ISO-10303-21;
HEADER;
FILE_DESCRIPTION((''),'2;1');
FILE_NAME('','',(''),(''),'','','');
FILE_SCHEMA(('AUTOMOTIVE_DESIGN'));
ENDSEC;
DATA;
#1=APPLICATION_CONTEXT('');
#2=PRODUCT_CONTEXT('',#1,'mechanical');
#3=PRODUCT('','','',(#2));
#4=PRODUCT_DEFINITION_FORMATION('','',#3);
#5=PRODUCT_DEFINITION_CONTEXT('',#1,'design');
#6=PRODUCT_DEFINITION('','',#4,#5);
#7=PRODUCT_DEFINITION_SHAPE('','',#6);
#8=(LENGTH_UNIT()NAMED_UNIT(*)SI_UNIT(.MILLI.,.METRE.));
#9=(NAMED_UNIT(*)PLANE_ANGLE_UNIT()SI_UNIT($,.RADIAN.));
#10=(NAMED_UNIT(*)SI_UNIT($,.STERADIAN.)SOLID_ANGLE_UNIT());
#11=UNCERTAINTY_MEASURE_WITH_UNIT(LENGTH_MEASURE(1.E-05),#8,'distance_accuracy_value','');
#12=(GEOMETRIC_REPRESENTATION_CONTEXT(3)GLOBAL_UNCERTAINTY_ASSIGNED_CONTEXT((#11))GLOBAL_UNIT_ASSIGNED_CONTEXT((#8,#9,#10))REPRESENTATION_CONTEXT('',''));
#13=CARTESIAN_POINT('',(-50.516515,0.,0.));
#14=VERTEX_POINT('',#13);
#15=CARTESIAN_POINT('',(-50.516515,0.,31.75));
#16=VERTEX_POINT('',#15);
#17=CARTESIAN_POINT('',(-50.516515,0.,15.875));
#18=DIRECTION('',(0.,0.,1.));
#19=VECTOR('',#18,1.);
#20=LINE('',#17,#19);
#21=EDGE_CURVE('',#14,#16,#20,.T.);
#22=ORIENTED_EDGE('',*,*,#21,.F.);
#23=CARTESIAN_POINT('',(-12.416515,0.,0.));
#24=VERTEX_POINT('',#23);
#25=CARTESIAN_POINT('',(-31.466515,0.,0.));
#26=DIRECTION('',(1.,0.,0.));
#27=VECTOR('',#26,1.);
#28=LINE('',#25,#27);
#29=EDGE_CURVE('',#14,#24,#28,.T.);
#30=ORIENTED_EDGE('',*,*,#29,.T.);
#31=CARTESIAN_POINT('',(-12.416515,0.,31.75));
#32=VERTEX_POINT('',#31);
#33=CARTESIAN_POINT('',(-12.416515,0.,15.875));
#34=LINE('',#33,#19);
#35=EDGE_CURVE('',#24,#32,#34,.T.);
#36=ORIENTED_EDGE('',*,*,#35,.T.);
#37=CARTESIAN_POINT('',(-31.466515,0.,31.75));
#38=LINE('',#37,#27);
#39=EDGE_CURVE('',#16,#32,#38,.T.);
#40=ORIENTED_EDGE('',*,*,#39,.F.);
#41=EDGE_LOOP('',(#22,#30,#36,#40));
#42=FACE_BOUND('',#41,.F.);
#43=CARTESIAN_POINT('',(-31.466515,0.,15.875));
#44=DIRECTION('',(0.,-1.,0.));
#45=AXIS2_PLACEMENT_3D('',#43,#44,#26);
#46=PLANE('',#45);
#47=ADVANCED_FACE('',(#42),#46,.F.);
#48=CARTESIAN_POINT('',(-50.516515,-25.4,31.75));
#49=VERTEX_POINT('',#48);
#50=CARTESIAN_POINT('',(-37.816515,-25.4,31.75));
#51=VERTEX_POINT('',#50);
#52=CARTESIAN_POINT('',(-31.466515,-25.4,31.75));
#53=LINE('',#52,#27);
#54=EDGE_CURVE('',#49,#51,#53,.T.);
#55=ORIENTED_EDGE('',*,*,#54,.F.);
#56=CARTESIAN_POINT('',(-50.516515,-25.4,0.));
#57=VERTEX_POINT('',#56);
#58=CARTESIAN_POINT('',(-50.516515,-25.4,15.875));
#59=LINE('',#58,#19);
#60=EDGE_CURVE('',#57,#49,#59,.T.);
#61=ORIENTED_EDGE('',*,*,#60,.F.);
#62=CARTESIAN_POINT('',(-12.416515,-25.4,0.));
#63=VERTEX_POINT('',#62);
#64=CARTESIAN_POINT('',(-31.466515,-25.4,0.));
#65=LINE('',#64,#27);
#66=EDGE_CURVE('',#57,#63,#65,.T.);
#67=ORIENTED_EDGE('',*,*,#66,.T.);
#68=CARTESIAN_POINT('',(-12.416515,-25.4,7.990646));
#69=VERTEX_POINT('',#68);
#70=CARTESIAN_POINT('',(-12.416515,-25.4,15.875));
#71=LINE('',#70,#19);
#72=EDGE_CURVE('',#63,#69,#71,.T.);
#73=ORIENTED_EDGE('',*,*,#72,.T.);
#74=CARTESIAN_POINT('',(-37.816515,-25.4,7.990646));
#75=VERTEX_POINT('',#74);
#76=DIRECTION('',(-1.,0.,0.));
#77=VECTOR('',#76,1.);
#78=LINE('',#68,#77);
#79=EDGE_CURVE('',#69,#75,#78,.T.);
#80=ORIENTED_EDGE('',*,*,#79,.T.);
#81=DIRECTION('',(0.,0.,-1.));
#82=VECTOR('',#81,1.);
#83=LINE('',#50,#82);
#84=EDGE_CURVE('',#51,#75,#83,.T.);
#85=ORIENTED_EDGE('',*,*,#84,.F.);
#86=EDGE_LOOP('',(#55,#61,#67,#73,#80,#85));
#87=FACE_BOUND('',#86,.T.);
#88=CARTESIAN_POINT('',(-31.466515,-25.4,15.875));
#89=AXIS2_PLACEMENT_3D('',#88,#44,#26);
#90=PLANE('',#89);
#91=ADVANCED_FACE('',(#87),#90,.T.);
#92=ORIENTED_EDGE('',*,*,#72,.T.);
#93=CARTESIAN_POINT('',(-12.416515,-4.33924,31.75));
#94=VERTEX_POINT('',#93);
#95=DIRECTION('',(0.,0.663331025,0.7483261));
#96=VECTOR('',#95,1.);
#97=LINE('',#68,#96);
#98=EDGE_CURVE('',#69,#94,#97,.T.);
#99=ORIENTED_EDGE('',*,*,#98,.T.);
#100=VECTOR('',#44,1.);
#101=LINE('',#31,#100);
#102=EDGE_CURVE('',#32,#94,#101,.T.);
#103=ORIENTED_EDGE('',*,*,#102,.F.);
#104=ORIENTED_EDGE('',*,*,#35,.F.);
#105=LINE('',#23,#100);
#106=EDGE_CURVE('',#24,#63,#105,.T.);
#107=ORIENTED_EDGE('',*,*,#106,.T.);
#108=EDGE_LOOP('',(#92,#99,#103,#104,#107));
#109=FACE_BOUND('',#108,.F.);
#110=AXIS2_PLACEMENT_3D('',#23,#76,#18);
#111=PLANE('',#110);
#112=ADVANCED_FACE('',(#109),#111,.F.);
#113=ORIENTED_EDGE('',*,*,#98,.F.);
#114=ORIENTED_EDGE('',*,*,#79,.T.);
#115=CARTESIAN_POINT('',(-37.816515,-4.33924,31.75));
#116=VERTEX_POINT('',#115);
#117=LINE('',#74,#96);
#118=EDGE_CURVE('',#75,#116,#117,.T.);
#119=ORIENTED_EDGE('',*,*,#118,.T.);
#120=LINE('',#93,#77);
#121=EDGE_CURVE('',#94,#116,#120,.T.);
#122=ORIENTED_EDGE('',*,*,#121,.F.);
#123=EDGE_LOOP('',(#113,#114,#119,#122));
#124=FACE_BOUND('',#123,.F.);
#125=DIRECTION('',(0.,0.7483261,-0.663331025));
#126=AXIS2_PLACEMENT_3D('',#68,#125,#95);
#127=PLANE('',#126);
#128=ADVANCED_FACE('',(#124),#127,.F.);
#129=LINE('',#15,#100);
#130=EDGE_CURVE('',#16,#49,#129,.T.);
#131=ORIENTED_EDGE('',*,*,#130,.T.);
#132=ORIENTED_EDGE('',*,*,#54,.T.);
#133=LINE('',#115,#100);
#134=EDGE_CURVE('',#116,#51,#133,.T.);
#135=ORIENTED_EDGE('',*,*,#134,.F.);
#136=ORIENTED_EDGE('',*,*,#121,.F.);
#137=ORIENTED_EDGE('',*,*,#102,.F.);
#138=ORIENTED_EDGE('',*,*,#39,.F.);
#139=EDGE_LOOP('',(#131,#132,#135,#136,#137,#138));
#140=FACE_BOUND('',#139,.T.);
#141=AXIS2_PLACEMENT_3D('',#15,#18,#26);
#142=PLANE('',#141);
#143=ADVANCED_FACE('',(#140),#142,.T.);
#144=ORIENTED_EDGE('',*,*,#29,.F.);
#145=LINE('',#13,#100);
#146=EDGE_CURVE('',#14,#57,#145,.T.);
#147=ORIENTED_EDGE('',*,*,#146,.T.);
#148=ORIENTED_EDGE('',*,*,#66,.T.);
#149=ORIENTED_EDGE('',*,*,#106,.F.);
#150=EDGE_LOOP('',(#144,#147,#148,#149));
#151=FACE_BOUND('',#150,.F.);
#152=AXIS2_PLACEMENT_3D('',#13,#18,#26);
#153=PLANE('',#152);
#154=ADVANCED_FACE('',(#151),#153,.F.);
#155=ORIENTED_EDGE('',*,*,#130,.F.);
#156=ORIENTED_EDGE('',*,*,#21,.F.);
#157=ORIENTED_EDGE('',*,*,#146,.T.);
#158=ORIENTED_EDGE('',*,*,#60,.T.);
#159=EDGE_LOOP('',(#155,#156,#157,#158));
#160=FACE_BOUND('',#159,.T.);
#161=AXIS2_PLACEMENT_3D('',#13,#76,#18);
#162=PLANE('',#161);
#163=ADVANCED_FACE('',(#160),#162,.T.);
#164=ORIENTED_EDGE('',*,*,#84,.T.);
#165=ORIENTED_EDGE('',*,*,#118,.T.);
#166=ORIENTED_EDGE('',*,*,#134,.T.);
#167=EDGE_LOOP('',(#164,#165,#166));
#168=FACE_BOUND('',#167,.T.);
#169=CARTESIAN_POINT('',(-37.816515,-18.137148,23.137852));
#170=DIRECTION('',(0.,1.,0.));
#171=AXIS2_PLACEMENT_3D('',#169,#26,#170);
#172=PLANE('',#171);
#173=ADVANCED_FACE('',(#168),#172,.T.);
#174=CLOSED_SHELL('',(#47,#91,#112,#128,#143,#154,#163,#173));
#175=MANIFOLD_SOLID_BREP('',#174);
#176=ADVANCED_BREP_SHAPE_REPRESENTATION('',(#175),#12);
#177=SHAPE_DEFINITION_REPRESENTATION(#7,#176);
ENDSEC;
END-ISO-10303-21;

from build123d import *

# Parameters (mm, degrees)
F0_W     = 38.1
F0_H     = 31.75
F1_DEPTH = 25.4
F4_DEPTH = 25.4


# Not quite as in the source:
# - a feature of the source that left no trace in its solid (it failed there, or was rolled back) is left out


with BuildPart() as f1:
    # F0 (on Front) → F1 (new body)
    with BuildSketch(Plane.XZ):
        with Locations((-31.4665150195, 15.875)):
            Rectangle(F0_W, F0_H)
    extrude(amount=F1_DEPTH)

    # F2 (on face) → F4 (cut)
    with BuildSketch(Plane.YZ.offset(-12.4165150195)):
        Polygon((-25.4, 7.9906463393), (-4.3392399561, 31.75), (-25.4, 31.75), align=None)
    extrude(amount=-F4_DEPTH, mode=Mode.SUBTRACT)


solid = f1.part
